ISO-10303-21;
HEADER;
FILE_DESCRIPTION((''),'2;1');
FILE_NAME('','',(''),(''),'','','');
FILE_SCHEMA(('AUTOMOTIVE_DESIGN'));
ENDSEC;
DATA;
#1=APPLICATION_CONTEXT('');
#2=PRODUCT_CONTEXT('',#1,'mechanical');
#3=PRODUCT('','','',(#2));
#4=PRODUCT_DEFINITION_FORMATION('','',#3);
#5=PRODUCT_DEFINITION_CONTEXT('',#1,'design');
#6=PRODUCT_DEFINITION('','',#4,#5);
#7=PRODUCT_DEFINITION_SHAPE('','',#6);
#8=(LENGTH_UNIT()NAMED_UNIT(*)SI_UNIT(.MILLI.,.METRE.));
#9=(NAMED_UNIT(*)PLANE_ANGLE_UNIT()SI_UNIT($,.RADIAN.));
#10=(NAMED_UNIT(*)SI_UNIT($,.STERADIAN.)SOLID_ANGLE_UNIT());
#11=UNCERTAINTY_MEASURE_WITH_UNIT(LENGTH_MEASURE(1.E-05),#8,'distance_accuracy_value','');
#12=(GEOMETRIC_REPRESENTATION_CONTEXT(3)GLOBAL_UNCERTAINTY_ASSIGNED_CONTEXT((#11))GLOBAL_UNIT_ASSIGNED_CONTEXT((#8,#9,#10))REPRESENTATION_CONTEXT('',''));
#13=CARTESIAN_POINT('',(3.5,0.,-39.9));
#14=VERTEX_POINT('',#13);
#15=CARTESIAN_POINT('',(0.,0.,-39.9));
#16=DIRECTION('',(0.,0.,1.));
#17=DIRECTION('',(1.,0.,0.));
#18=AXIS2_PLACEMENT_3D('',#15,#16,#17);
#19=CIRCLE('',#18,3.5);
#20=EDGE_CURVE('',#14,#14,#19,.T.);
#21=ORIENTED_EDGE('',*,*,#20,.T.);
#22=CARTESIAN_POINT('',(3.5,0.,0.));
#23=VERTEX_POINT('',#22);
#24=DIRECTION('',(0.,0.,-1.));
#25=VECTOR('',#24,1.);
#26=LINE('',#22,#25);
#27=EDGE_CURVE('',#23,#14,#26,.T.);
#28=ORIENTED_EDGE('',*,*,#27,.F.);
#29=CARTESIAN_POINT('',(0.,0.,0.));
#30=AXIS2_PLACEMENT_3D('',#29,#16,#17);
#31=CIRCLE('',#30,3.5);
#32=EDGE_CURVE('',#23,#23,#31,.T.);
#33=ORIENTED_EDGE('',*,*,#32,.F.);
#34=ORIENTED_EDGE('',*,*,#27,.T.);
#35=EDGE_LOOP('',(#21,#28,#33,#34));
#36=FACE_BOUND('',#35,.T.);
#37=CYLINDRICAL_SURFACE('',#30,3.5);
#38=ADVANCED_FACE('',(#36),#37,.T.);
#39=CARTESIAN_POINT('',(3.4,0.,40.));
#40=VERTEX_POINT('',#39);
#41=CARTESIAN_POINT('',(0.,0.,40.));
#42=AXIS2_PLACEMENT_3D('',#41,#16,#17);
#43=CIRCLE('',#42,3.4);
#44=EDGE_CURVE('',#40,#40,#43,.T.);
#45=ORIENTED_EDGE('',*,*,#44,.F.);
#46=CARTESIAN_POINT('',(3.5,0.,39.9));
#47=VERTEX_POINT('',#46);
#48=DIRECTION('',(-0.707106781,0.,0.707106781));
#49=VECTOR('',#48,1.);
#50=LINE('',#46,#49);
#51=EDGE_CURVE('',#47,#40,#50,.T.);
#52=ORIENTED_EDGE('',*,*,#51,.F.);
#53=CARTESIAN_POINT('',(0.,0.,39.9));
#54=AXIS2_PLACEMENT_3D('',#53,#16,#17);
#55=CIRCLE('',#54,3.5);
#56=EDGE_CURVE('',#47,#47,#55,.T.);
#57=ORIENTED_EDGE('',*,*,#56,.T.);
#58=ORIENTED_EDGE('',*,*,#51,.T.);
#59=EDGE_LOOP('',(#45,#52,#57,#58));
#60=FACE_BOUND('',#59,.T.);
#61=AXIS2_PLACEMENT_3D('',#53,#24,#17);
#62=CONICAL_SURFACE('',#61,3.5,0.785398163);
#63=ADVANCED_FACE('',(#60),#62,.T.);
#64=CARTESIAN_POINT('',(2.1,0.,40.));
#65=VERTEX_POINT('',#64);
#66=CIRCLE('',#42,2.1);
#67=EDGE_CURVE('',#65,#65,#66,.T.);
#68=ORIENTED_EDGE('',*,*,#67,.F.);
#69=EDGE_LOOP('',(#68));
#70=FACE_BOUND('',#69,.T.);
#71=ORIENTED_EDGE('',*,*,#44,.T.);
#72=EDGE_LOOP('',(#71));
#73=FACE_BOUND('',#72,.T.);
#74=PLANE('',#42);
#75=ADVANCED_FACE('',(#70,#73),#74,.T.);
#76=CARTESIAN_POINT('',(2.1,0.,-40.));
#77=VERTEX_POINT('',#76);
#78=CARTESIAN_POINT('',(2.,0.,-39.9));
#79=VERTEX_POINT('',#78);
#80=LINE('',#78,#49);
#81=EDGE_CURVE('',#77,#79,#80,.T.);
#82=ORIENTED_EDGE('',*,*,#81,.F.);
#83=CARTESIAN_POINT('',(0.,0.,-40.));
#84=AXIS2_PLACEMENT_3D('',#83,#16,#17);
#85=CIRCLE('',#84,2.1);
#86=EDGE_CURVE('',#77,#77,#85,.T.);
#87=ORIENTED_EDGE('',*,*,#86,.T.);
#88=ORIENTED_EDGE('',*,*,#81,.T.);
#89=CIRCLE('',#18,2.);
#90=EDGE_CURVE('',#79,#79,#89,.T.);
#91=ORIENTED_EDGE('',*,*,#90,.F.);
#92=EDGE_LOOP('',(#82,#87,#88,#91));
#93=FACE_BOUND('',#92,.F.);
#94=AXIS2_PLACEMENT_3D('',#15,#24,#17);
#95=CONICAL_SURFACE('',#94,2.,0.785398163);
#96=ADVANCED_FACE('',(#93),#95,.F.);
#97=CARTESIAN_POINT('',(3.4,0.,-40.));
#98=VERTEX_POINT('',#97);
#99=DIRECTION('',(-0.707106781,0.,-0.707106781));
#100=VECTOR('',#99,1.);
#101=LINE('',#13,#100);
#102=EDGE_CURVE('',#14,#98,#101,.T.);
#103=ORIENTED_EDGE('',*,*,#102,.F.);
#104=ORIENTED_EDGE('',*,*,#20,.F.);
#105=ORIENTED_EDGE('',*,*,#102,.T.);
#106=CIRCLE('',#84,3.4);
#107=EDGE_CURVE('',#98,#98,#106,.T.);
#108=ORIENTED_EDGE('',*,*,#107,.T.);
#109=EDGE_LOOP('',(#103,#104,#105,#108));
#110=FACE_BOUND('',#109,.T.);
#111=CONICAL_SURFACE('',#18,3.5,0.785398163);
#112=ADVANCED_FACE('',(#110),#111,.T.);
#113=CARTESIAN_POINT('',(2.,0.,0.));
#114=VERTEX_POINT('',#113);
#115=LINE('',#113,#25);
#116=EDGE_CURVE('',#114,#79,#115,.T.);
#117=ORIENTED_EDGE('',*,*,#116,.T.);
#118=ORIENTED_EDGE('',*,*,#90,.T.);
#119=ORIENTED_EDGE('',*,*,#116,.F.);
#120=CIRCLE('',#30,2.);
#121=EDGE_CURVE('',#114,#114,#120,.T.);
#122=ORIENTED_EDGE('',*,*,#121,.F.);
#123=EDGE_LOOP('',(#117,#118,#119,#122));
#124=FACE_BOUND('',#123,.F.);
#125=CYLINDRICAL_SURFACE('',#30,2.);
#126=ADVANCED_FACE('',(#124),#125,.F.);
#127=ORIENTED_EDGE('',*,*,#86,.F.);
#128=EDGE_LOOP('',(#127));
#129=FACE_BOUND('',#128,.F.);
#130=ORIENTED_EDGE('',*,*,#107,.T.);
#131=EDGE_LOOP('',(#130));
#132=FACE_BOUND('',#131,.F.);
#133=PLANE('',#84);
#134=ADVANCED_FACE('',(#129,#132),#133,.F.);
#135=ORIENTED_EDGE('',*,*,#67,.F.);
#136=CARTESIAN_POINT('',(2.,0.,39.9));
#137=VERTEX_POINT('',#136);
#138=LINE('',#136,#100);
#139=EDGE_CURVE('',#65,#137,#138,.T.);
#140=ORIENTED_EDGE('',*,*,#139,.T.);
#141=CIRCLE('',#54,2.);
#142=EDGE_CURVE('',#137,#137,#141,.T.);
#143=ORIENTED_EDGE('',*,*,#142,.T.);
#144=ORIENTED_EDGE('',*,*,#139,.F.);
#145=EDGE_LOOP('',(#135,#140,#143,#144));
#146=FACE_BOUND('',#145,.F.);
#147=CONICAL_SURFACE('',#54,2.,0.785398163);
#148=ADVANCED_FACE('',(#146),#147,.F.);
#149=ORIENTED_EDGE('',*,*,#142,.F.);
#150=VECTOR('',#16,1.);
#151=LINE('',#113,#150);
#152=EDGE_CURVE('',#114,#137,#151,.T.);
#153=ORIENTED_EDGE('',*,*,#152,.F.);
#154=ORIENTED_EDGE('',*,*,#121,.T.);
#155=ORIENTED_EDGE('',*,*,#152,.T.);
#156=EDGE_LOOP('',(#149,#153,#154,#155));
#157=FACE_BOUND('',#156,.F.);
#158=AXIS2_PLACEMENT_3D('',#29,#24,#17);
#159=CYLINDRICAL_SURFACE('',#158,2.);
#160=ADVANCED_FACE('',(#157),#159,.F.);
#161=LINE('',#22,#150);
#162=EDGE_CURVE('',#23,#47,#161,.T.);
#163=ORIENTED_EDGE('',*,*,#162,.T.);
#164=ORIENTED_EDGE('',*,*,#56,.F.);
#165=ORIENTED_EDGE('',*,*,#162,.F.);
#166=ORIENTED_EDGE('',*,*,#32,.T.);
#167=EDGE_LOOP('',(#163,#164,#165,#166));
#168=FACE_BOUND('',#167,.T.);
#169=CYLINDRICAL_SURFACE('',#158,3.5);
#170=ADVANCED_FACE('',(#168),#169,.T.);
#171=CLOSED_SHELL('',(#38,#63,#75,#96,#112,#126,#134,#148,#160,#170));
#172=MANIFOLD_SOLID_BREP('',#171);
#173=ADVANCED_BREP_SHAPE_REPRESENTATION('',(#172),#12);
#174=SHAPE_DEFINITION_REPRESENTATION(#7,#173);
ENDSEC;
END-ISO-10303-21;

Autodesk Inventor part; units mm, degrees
ref_plane "YZ Plane" through (0, 0, 0) normal (1, 0, 0) x (0, 1, 0)
ref_plane "XZ Plane" through (0, 0, 0) normal (0, 1, 0) x (-1, 0, 0)
ref_plane "XY Plane" through (0, 0, 0) normal (0, 0, 1) x (1, 0, 0)
sketch "Sketch1" plane through (0, 0, 0) normal (0, 0, 1) x (1, 0, 0)
  circle A0 centre (0, 0) radius 3.5
  circle A1 centre (0, 0) radius 2
  dimension "d0" = 7
  dimension "d1" = 4
extrude "Extrusion1" add sketch "Sketch1" along normal mid plane 80
thread "Thread1" size "M4x0.7" class "6H" standard "ANSI Metric M Profile" length 10
thread "Thread2" size "M4x0.7" class "6H" standard "ANSI Metric M Profile" length 10
chamfer "Chamfer1" distance 0.1 angle 45 4 edges at (-3.5, 0, 40) (-2, 0, 40) (-2, 0, -40) (-3.5, 0, -40)
properties part number "M4 80mm Standoff" material "Aluminum 6061"
